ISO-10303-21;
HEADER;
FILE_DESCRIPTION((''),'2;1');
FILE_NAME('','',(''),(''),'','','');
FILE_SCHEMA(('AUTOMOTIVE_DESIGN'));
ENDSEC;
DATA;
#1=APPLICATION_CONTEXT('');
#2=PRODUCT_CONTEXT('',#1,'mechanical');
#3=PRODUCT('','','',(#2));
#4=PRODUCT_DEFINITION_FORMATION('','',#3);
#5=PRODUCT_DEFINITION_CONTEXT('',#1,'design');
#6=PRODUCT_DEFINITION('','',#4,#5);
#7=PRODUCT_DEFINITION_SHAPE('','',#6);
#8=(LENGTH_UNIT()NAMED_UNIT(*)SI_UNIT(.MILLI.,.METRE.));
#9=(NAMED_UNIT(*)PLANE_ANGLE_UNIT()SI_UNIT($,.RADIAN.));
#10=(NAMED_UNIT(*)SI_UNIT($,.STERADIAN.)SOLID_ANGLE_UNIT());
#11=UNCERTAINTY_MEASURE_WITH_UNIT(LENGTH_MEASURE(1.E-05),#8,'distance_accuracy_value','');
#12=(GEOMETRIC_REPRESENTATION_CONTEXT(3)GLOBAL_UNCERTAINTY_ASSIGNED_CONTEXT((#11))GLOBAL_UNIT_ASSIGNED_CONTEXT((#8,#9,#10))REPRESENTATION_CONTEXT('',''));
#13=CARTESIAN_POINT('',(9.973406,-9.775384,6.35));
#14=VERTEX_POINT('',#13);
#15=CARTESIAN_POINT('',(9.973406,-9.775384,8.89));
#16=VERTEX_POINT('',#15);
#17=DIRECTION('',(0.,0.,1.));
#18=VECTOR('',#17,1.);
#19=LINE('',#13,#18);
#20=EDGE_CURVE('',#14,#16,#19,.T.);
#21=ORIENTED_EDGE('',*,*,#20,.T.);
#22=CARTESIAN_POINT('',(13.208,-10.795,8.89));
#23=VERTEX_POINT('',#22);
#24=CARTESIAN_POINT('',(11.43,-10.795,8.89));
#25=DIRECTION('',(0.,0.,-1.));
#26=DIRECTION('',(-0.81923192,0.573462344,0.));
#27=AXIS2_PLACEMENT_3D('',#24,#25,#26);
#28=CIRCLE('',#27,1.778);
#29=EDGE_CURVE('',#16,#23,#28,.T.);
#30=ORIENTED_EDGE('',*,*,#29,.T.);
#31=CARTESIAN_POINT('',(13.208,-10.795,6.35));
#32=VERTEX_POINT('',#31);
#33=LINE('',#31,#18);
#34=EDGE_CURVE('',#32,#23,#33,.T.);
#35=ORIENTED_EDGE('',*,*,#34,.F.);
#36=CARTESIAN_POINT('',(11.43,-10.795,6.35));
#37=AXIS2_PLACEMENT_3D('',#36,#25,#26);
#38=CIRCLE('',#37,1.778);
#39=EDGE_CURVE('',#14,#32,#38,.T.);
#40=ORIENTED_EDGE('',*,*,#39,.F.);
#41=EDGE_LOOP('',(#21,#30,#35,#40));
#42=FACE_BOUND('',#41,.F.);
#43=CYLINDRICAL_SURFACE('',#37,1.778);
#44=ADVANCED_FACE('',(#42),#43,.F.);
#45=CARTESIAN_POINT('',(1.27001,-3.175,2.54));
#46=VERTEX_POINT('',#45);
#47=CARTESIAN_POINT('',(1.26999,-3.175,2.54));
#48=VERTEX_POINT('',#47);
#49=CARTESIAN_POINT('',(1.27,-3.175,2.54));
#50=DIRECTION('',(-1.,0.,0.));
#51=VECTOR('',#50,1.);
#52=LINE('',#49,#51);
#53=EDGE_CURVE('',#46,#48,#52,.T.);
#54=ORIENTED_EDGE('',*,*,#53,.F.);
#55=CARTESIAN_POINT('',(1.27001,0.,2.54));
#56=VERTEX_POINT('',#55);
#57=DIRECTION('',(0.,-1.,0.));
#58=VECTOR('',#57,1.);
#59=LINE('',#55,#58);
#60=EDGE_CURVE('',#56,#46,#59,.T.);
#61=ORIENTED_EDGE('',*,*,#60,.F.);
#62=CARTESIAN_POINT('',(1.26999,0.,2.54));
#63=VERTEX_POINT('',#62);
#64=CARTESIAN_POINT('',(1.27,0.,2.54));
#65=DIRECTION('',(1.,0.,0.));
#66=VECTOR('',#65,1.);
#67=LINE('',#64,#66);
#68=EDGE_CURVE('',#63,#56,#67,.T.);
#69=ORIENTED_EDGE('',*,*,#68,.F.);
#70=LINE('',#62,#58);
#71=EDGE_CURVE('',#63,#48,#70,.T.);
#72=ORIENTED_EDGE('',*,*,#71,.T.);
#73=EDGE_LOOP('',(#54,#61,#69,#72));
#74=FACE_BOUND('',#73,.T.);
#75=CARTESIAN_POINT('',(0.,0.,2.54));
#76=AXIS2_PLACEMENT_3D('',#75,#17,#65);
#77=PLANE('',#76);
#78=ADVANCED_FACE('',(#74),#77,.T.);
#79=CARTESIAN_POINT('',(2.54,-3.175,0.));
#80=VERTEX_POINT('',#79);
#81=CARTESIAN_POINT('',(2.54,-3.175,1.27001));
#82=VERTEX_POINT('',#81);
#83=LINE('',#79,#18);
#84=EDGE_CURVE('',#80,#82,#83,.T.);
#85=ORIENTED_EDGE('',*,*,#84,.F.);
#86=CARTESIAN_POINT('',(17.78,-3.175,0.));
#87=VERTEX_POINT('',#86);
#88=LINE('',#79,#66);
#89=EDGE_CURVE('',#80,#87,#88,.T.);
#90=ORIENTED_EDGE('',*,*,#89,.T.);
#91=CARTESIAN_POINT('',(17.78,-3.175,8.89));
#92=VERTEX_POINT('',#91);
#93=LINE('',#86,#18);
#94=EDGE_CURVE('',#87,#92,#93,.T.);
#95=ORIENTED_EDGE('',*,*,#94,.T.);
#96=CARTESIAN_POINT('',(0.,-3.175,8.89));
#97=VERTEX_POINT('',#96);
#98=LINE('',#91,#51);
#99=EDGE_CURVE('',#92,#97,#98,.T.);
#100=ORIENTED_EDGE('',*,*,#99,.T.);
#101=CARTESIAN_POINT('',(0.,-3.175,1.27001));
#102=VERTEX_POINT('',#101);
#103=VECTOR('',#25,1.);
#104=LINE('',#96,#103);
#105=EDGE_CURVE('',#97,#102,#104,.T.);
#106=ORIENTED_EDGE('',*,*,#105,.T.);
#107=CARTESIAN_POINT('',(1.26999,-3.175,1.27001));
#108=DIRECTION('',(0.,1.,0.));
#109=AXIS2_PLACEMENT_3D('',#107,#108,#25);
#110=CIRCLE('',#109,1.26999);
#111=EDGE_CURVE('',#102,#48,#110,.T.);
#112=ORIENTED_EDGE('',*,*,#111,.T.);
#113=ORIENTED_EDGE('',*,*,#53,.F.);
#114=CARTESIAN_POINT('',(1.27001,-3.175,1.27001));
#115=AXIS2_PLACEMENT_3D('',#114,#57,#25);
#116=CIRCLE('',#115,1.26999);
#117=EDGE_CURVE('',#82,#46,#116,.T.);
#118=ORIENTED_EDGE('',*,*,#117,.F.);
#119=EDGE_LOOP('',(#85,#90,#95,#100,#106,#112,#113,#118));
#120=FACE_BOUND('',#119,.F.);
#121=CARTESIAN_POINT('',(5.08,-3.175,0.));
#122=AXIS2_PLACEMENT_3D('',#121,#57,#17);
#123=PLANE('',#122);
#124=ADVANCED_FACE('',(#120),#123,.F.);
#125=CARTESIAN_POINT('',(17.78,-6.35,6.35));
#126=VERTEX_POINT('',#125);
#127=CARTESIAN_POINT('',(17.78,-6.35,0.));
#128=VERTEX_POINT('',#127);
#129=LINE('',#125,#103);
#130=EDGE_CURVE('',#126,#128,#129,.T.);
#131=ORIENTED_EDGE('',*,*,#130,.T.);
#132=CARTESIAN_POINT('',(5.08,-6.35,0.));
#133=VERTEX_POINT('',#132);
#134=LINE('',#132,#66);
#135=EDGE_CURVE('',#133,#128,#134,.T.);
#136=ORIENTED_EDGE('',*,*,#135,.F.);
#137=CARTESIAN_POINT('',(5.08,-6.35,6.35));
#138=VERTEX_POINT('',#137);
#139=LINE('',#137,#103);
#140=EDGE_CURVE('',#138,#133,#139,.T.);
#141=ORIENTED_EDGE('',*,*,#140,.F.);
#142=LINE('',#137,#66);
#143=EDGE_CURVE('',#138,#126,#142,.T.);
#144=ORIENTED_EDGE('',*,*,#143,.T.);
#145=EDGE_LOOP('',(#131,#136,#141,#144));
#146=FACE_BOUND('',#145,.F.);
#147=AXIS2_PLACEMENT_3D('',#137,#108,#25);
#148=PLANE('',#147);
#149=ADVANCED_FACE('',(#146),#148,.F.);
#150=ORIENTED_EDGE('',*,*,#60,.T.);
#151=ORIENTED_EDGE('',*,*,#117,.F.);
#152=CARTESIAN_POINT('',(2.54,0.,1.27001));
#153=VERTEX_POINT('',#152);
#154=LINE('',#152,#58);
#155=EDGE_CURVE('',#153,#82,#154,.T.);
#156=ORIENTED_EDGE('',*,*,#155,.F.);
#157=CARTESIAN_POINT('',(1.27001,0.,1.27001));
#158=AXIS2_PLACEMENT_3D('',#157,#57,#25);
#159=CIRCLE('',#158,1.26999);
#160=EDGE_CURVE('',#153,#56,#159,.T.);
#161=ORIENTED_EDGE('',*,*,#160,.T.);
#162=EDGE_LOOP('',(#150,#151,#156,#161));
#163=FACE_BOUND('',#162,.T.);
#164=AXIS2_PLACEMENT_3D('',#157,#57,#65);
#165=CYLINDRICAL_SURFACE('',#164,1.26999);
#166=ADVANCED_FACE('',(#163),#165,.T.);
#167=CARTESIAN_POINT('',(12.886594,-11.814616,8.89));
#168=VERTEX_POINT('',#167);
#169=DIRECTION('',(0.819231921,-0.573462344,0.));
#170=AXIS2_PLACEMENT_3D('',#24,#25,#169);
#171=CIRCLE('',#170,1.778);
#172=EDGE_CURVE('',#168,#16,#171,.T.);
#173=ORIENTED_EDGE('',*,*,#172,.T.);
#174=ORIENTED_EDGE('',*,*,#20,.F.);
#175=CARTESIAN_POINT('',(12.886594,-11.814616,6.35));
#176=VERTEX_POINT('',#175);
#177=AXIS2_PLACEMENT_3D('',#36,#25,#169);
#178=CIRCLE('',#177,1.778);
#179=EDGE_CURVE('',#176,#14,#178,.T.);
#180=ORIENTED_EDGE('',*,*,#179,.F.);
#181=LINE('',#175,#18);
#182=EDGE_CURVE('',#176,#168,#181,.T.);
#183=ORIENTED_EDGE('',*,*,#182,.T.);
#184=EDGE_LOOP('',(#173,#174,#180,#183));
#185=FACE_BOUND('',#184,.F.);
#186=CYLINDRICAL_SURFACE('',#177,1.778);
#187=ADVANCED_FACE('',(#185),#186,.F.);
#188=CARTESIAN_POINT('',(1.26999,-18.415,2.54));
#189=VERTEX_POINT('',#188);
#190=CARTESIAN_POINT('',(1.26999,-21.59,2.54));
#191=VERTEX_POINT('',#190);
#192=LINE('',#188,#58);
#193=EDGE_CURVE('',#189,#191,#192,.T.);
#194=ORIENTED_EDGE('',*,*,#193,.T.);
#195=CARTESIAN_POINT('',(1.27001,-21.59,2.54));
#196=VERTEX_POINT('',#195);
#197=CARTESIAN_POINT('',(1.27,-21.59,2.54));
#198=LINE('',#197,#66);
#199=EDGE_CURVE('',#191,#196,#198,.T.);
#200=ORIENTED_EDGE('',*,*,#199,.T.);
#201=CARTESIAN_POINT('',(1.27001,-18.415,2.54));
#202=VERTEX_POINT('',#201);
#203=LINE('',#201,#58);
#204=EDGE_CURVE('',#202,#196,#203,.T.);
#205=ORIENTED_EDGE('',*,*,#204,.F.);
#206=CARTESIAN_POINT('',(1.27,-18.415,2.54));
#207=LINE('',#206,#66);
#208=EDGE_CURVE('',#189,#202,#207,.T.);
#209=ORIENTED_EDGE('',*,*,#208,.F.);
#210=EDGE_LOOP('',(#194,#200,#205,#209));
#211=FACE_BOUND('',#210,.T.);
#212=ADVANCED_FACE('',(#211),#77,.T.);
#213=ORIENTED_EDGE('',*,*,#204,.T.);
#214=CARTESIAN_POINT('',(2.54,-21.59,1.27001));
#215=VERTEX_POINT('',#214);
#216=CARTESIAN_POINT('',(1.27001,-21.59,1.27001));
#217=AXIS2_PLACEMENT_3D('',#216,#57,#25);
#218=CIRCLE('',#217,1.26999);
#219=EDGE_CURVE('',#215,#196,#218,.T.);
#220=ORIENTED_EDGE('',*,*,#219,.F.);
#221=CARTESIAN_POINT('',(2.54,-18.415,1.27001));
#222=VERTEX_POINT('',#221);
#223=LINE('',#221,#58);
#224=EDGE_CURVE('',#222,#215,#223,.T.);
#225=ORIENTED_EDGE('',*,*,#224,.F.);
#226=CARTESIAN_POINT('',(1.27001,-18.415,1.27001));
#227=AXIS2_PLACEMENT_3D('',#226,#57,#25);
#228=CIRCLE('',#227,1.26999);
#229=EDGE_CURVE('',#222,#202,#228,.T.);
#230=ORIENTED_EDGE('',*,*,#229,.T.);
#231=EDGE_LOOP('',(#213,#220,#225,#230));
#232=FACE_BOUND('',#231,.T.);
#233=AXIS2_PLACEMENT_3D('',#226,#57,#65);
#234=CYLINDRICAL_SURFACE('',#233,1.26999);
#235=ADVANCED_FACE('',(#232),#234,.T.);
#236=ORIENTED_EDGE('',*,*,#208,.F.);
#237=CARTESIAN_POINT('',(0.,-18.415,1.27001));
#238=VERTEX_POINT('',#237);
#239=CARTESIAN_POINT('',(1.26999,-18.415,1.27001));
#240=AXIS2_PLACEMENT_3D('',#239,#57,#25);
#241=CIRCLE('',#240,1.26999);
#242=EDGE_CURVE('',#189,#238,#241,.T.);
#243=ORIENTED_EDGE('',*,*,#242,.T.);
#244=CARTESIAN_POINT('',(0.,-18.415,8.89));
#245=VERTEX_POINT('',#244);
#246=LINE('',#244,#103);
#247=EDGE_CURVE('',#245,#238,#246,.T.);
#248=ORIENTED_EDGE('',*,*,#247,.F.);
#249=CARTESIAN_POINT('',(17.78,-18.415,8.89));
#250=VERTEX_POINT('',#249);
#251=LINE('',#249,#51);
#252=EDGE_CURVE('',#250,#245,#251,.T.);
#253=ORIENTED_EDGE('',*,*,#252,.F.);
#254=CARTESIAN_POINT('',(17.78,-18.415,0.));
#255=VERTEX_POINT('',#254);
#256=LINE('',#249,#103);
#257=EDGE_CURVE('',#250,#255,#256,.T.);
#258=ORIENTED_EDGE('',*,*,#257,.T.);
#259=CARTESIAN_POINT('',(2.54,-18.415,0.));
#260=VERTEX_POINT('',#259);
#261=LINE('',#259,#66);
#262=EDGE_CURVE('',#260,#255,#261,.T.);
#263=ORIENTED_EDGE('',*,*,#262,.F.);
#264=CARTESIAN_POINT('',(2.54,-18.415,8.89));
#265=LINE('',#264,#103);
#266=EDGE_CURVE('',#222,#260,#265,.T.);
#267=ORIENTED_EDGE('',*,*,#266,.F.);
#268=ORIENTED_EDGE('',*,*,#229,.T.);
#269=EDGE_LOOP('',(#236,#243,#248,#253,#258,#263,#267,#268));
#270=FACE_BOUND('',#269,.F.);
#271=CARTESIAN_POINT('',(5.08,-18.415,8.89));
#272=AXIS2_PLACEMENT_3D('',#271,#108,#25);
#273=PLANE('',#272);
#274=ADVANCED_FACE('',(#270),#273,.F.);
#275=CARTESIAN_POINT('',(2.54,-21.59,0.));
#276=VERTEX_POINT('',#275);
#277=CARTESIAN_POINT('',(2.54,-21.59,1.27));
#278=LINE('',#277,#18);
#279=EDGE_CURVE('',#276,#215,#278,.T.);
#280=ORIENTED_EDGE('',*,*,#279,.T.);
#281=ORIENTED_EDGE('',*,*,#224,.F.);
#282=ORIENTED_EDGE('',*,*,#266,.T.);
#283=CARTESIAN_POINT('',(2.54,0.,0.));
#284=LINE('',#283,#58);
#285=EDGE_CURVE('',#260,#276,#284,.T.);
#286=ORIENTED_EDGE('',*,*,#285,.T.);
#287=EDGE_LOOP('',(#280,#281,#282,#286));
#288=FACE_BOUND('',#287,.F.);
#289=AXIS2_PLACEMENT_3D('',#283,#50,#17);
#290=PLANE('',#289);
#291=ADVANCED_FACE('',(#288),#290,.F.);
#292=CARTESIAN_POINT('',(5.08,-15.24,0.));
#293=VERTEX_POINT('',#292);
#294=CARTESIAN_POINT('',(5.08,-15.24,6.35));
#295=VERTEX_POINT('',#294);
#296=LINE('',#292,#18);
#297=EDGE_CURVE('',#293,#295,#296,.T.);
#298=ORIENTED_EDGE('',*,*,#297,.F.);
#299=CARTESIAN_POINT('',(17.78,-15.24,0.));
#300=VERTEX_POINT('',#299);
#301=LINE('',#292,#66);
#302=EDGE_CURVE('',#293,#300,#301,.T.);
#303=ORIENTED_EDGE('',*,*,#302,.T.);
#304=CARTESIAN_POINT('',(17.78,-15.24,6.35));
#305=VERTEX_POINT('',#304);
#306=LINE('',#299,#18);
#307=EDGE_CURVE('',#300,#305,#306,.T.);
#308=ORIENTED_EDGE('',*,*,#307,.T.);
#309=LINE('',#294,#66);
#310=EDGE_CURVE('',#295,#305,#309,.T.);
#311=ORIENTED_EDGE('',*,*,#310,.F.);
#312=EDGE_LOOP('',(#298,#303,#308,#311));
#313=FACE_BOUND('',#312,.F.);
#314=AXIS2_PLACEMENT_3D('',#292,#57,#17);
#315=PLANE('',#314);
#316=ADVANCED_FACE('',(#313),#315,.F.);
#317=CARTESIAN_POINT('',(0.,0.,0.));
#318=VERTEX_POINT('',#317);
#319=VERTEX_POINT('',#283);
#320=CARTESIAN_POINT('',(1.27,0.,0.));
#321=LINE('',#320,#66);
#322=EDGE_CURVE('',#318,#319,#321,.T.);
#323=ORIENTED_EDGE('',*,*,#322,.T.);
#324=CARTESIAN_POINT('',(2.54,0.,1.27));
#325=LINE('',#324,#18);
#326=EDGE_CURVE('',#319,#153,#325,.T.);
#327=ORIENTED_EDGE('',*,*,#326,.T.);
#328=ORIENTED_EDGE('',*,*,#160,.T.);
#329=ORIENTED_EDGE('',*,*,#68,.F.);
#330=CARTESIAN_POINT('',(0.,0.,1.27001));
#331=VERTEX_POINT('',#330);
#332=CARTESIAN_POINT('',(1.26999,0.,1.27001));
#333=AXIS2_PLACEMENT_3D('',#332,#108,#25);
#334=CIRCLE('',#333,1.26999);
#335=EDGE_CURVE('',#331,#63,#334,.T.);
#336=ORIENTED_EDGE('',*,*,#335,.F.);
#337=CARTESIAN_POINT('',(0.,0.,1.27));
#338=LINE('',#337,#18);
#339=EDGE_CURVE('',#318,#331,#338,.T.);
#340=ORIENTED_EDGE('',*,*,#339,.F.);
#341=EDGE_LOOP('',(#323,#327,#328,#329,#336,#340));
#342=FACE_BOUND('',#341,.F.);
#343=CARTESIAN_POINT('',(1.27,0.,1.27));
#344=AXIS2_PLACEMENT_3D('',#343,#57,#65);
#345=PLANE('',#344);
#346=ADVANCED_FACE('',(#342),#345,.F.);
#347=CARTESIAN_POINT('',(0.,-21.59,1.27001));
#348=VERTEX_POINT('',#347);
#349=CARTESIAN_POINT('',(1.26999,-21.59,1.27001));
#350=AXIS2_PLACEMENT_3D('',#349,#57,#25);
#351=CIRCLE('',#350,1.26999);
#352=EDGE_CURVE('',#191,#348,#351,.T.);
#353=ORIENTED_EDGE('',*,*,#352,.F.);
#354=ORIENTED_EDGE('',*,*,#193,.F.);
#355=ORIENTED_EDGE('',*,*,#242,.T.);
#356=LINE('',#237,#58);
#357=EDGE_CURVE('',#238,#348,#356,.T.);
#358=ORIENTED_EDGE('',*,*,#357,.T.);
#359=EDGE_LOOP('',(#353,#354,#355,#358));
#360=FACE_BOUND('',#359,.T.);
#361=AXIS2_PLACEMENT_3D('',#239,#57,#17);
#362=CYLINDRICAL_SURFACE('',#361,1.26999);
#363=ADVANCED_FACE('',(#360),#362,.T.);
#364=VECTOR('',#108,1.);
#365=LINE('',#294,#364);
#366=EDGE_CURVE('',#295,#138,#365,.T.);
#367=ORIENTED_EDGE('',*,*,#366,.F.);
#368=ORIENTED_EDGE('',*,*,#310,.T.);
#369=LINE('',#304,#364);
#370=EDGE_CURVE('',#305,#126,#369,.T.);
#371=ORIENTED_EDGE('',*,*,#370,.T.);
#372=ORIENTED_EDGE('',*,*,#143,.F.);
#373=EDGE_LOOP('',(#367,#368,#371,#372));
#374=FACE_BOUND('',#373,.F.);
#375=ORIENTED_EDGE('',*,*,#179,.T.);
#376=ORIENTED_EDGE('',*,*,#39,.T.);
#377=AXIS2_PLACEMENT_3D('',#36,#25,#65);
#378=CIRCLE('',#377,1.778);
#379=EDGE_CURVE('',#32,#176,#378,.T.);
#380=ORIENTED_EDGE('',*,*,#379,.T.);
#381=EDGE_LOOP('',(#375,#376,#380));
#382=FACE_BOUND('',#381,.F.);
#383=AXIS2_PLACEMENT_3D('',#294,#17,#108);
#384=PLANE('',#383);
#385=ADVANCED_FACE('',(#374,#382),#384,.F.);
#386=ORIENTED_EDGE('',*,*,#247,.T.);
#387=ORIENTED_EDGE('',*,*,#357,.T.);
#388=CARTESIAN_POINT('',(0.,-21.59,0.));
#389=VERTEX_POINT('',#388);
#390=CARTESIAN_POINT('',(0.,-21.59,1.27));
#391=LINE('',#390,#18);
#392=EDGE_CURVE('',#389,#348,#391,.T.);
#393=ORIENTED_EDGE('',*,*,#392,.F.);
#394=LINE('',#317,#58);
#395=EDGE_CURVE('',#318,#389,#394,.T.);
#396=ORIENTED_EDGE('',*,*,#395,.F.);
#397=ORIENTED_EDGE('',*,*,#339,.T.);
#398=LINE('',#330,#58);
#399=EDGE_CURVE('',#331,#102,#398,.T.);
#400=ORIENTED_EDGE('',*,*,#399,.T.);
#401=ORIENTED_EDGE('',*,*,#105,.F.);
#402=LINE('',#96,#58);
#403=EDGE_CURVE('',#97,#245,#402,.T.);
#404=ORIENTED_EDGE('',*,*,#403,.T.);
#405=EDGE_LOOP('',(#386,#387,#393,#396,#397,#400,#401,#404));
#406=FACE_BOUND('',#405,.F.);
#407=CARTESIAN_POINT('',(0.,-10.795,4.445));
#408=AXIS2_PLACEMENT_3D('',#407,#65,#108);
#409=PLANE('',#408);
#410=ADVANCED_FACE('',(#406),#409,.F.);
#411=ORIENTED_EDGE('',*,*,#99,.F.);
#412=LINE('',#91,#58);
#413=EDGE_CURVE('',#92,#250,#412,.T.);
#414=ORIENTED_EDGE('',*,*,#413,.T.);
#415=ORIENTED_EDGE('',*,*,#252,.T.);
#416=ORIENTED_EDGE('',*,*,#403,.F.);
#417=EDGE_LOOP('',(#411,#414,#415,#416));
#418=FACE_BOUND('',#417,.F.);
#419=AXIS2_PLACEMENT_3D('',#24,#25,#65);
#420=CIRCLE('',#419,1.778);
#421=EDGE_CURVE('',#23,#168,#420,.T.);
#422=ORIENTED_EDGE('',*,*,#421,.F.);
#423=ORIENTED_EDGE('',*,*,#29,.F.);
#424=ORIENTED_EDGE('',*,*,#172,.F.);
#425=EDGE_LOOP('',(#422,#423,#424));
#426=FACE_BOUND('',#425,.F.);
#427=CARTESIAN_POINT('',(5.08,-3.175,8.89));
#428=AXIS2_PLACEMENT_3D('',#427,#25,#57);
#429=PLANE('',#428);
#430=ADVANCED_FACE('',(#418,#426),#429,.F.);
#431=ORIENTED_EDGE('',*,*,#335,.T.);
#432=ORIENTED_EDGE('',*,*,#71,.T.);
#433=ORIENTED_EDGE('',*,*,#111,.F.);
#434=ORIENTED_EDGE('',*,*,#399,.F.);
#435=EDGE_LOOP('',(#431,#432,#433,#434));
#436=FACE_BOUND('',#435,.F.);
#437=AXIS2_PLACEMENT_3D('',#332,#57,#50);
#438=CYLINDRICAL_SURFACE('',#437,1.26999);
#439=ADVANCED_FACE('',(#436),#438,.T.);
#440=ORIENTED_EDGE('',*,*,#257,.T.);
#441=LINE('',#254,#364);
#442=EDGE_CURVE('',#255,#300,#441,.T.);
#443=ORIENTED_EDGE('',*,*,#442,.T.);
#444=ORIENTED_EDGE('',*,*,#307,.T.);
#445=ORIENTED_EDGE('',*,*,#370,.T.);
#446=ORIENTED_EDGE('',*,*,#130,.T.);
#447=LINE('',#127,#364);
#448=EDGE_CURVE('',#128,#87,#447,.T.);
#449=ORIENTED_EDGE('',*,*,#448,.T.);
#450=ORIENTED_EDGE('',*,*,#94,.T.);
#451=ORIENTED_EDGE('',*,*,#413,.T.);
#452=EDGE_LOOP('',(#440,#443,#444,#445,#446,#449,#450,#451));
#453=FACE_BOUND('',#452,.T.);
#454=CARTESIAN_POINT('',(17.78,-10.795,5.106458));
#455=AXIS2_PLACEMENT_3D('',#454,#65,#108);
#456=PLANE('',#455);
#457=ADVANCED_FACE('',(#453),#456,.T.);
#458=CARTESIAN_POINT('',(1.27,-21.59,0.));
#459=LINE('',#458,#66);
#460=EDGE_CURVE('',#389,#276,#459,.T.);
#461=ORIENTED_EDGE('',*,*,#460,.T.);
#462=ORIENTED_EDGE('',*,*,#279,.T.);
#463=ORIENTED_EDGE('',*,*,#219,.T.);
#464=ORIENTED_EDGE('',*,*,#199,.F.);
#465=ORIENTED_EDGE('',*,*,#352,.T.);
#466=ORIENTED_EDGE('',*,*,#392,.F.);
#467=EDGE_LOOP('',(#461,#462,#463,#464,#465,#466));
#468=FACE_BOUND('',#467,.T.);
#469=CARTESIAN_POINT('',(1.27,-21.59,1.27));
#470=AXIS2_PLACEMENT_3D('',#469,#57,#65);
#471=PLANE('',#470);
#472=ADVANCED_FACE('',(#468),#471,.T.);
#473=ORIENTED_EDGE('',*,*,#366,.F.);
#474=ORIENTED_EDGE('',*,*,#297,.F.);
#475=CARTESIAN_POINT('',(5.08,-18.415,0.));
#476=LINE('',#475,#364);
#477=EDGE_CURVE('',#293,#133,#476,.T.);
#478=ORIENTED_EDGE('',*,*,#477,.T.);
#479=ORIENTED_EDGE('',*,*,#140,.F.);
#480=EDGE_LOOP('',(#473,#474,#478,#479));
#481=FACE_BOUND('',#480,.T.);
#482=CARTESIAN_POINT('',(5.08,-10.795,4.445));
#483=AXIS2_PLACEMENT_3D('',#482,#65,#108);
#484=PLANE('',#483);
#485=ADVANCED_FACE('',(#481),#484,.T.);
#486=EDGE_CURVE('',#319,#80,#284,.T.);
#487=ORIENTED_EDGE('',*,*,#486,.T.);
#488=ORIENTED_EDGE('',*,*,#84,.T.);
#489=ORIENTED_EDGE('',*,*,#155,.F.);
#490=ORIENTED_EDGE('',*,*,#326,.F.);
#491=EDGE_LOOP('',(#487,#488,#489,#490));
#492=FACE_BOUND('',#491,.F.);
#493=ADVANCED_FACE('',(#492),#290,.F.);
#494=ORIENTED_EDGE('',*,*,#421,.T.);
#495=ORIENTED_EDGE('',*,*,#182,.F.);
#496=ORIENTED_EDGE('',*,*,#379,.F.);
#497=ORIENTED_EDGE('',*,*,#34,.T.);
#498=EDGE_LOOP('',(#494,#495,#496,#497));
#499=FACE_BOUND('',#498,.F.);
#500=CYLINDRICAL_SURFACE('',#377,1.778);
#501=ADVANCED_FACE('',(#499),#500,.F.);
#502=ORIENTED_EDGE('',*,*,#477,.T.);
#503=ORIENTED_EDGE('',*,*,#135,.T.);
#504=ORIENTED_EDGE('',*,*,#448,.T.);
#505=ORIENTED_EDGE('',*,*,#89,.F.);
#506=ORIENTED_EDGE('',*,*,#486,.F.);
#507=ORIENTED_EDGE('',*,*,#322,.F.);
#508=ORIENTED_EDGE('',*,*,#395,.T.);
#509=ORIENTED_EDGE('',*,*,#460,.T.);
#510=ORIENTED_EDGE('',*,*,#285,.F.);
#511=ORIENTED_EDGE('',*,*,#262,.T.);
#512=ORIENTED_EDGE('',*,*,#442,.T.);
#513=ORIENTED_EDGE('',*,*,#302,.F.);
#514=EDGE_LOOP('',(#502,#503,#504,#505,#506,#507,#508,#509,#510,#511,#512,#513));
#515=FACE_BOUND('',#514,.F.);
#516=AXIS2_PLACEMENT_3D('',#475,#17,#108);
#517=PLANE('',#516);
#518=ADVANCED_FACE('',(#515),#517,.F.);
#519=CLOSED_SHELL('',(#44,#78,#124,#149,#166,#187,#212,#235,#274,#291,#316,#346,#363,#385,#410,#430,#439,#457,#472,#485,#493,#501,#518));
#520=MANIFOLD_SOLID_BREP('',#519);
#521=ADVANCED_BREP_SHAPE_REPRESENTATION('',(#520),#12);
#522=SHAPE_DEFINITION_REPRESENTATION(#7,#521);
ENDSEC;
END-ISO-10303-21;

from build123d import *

# Parameters (mm, degrees)
F0_W          = 2.54
F0_H          = 2.54
F1_DEPTH      = 21.59
F3_DEPTH      = 2.54
F3_DEPTH_BACK = 2.54
F5_DEPTH      = 12.7
F7_DEPTH      = 25.4
F8_R          = 1.26999


# Not quite as in the source:
# - a fillet or chamfer is up to 0.001 mm smaller than in the source, because OpenCascade refuses the exact size


with BuildPart() as f1:
    # F0 (on Front) → F1 (new body)
    with BuildSketch(Plane.XZ):
        with Locations((1.27, 1.27)):
            Rectangle(F0_W, F0_H)
    extrude(amount=F1_DEPTH)

    # F2 (on face) → F3 (join, two sides)
    with BuildSketch(Plane.YZ.offset(2.54)) as f3_sk:
        Polygon((-18.415, 8.89), (-18.415, 2.54), (-18.415, 0), (-3.175, 0), (-3.175, 2.54), (-3.175, 8.89), align=None)
    extrude(amount=F3_DEPTH)
    extrude(f3_sk.sketch, amount=-F3_DEPTH_BACK)

    # F4 (on face) → F5 (join)
    with BuildSketch(Plane.YZ.offset(5.08)):
        Polygon((-18.415, 8.89), (-18.415, 0), (-15.24, 0), (-15.24, 6.35), (-6.35, 6.35), (-6.35, 0), (-3.175, 0), (-3.175, 8.89), align=None)
    extrude(amount=F5_DEPTH)

    # F6 (on face) → F7 (cut)
    with BuildSketch(Plane(origin=(0, 0, 6.35), x_dir=(1, 0, 0), z_dir=(0, 0, -1))):
        with BuildLine():
            ThreePointArc((12.8865943547, 11.8146160483), (10.4103839517, 12.2515943547), (9.9734056453, 9.7753839517))
            Line((9.9734056453, 9.7753839517), (12.8865943547, 11.8146160483))
        make_face()
        with BuildLine():
            Line((12.8865943547, 11.8146160483), (9.9734056453, 9.7753839517))
            ThreePointArc((9.9734056453, 9.7753839517), (11.9645368263, 9.099254034), (13.208, 10.795))
            ThreePointArc((13.208, 10.795), (13.125745966, 11.3295368263), (12.8865943547, 11.8146160483))
        make_face()
    extrude(amount=-F7_DEPTH, mode=Mode.SUBTRACT)

    # F8 (radius 1.27 in the source; OpenCascade refuses exactly that, so slightly less here)
    f8_edges = [f1.edges().sort_by_distance(p)[0] for p in [
        (0, -1.5875, 2.54),
        (2.54, -1.5875, 2.54),
        (0, -20.0025, 2.54),
        (2.54, -20.0025, 2.54),
    ]]
    fillet(f8_edges, radius=F8_R)


solid = f1.part
